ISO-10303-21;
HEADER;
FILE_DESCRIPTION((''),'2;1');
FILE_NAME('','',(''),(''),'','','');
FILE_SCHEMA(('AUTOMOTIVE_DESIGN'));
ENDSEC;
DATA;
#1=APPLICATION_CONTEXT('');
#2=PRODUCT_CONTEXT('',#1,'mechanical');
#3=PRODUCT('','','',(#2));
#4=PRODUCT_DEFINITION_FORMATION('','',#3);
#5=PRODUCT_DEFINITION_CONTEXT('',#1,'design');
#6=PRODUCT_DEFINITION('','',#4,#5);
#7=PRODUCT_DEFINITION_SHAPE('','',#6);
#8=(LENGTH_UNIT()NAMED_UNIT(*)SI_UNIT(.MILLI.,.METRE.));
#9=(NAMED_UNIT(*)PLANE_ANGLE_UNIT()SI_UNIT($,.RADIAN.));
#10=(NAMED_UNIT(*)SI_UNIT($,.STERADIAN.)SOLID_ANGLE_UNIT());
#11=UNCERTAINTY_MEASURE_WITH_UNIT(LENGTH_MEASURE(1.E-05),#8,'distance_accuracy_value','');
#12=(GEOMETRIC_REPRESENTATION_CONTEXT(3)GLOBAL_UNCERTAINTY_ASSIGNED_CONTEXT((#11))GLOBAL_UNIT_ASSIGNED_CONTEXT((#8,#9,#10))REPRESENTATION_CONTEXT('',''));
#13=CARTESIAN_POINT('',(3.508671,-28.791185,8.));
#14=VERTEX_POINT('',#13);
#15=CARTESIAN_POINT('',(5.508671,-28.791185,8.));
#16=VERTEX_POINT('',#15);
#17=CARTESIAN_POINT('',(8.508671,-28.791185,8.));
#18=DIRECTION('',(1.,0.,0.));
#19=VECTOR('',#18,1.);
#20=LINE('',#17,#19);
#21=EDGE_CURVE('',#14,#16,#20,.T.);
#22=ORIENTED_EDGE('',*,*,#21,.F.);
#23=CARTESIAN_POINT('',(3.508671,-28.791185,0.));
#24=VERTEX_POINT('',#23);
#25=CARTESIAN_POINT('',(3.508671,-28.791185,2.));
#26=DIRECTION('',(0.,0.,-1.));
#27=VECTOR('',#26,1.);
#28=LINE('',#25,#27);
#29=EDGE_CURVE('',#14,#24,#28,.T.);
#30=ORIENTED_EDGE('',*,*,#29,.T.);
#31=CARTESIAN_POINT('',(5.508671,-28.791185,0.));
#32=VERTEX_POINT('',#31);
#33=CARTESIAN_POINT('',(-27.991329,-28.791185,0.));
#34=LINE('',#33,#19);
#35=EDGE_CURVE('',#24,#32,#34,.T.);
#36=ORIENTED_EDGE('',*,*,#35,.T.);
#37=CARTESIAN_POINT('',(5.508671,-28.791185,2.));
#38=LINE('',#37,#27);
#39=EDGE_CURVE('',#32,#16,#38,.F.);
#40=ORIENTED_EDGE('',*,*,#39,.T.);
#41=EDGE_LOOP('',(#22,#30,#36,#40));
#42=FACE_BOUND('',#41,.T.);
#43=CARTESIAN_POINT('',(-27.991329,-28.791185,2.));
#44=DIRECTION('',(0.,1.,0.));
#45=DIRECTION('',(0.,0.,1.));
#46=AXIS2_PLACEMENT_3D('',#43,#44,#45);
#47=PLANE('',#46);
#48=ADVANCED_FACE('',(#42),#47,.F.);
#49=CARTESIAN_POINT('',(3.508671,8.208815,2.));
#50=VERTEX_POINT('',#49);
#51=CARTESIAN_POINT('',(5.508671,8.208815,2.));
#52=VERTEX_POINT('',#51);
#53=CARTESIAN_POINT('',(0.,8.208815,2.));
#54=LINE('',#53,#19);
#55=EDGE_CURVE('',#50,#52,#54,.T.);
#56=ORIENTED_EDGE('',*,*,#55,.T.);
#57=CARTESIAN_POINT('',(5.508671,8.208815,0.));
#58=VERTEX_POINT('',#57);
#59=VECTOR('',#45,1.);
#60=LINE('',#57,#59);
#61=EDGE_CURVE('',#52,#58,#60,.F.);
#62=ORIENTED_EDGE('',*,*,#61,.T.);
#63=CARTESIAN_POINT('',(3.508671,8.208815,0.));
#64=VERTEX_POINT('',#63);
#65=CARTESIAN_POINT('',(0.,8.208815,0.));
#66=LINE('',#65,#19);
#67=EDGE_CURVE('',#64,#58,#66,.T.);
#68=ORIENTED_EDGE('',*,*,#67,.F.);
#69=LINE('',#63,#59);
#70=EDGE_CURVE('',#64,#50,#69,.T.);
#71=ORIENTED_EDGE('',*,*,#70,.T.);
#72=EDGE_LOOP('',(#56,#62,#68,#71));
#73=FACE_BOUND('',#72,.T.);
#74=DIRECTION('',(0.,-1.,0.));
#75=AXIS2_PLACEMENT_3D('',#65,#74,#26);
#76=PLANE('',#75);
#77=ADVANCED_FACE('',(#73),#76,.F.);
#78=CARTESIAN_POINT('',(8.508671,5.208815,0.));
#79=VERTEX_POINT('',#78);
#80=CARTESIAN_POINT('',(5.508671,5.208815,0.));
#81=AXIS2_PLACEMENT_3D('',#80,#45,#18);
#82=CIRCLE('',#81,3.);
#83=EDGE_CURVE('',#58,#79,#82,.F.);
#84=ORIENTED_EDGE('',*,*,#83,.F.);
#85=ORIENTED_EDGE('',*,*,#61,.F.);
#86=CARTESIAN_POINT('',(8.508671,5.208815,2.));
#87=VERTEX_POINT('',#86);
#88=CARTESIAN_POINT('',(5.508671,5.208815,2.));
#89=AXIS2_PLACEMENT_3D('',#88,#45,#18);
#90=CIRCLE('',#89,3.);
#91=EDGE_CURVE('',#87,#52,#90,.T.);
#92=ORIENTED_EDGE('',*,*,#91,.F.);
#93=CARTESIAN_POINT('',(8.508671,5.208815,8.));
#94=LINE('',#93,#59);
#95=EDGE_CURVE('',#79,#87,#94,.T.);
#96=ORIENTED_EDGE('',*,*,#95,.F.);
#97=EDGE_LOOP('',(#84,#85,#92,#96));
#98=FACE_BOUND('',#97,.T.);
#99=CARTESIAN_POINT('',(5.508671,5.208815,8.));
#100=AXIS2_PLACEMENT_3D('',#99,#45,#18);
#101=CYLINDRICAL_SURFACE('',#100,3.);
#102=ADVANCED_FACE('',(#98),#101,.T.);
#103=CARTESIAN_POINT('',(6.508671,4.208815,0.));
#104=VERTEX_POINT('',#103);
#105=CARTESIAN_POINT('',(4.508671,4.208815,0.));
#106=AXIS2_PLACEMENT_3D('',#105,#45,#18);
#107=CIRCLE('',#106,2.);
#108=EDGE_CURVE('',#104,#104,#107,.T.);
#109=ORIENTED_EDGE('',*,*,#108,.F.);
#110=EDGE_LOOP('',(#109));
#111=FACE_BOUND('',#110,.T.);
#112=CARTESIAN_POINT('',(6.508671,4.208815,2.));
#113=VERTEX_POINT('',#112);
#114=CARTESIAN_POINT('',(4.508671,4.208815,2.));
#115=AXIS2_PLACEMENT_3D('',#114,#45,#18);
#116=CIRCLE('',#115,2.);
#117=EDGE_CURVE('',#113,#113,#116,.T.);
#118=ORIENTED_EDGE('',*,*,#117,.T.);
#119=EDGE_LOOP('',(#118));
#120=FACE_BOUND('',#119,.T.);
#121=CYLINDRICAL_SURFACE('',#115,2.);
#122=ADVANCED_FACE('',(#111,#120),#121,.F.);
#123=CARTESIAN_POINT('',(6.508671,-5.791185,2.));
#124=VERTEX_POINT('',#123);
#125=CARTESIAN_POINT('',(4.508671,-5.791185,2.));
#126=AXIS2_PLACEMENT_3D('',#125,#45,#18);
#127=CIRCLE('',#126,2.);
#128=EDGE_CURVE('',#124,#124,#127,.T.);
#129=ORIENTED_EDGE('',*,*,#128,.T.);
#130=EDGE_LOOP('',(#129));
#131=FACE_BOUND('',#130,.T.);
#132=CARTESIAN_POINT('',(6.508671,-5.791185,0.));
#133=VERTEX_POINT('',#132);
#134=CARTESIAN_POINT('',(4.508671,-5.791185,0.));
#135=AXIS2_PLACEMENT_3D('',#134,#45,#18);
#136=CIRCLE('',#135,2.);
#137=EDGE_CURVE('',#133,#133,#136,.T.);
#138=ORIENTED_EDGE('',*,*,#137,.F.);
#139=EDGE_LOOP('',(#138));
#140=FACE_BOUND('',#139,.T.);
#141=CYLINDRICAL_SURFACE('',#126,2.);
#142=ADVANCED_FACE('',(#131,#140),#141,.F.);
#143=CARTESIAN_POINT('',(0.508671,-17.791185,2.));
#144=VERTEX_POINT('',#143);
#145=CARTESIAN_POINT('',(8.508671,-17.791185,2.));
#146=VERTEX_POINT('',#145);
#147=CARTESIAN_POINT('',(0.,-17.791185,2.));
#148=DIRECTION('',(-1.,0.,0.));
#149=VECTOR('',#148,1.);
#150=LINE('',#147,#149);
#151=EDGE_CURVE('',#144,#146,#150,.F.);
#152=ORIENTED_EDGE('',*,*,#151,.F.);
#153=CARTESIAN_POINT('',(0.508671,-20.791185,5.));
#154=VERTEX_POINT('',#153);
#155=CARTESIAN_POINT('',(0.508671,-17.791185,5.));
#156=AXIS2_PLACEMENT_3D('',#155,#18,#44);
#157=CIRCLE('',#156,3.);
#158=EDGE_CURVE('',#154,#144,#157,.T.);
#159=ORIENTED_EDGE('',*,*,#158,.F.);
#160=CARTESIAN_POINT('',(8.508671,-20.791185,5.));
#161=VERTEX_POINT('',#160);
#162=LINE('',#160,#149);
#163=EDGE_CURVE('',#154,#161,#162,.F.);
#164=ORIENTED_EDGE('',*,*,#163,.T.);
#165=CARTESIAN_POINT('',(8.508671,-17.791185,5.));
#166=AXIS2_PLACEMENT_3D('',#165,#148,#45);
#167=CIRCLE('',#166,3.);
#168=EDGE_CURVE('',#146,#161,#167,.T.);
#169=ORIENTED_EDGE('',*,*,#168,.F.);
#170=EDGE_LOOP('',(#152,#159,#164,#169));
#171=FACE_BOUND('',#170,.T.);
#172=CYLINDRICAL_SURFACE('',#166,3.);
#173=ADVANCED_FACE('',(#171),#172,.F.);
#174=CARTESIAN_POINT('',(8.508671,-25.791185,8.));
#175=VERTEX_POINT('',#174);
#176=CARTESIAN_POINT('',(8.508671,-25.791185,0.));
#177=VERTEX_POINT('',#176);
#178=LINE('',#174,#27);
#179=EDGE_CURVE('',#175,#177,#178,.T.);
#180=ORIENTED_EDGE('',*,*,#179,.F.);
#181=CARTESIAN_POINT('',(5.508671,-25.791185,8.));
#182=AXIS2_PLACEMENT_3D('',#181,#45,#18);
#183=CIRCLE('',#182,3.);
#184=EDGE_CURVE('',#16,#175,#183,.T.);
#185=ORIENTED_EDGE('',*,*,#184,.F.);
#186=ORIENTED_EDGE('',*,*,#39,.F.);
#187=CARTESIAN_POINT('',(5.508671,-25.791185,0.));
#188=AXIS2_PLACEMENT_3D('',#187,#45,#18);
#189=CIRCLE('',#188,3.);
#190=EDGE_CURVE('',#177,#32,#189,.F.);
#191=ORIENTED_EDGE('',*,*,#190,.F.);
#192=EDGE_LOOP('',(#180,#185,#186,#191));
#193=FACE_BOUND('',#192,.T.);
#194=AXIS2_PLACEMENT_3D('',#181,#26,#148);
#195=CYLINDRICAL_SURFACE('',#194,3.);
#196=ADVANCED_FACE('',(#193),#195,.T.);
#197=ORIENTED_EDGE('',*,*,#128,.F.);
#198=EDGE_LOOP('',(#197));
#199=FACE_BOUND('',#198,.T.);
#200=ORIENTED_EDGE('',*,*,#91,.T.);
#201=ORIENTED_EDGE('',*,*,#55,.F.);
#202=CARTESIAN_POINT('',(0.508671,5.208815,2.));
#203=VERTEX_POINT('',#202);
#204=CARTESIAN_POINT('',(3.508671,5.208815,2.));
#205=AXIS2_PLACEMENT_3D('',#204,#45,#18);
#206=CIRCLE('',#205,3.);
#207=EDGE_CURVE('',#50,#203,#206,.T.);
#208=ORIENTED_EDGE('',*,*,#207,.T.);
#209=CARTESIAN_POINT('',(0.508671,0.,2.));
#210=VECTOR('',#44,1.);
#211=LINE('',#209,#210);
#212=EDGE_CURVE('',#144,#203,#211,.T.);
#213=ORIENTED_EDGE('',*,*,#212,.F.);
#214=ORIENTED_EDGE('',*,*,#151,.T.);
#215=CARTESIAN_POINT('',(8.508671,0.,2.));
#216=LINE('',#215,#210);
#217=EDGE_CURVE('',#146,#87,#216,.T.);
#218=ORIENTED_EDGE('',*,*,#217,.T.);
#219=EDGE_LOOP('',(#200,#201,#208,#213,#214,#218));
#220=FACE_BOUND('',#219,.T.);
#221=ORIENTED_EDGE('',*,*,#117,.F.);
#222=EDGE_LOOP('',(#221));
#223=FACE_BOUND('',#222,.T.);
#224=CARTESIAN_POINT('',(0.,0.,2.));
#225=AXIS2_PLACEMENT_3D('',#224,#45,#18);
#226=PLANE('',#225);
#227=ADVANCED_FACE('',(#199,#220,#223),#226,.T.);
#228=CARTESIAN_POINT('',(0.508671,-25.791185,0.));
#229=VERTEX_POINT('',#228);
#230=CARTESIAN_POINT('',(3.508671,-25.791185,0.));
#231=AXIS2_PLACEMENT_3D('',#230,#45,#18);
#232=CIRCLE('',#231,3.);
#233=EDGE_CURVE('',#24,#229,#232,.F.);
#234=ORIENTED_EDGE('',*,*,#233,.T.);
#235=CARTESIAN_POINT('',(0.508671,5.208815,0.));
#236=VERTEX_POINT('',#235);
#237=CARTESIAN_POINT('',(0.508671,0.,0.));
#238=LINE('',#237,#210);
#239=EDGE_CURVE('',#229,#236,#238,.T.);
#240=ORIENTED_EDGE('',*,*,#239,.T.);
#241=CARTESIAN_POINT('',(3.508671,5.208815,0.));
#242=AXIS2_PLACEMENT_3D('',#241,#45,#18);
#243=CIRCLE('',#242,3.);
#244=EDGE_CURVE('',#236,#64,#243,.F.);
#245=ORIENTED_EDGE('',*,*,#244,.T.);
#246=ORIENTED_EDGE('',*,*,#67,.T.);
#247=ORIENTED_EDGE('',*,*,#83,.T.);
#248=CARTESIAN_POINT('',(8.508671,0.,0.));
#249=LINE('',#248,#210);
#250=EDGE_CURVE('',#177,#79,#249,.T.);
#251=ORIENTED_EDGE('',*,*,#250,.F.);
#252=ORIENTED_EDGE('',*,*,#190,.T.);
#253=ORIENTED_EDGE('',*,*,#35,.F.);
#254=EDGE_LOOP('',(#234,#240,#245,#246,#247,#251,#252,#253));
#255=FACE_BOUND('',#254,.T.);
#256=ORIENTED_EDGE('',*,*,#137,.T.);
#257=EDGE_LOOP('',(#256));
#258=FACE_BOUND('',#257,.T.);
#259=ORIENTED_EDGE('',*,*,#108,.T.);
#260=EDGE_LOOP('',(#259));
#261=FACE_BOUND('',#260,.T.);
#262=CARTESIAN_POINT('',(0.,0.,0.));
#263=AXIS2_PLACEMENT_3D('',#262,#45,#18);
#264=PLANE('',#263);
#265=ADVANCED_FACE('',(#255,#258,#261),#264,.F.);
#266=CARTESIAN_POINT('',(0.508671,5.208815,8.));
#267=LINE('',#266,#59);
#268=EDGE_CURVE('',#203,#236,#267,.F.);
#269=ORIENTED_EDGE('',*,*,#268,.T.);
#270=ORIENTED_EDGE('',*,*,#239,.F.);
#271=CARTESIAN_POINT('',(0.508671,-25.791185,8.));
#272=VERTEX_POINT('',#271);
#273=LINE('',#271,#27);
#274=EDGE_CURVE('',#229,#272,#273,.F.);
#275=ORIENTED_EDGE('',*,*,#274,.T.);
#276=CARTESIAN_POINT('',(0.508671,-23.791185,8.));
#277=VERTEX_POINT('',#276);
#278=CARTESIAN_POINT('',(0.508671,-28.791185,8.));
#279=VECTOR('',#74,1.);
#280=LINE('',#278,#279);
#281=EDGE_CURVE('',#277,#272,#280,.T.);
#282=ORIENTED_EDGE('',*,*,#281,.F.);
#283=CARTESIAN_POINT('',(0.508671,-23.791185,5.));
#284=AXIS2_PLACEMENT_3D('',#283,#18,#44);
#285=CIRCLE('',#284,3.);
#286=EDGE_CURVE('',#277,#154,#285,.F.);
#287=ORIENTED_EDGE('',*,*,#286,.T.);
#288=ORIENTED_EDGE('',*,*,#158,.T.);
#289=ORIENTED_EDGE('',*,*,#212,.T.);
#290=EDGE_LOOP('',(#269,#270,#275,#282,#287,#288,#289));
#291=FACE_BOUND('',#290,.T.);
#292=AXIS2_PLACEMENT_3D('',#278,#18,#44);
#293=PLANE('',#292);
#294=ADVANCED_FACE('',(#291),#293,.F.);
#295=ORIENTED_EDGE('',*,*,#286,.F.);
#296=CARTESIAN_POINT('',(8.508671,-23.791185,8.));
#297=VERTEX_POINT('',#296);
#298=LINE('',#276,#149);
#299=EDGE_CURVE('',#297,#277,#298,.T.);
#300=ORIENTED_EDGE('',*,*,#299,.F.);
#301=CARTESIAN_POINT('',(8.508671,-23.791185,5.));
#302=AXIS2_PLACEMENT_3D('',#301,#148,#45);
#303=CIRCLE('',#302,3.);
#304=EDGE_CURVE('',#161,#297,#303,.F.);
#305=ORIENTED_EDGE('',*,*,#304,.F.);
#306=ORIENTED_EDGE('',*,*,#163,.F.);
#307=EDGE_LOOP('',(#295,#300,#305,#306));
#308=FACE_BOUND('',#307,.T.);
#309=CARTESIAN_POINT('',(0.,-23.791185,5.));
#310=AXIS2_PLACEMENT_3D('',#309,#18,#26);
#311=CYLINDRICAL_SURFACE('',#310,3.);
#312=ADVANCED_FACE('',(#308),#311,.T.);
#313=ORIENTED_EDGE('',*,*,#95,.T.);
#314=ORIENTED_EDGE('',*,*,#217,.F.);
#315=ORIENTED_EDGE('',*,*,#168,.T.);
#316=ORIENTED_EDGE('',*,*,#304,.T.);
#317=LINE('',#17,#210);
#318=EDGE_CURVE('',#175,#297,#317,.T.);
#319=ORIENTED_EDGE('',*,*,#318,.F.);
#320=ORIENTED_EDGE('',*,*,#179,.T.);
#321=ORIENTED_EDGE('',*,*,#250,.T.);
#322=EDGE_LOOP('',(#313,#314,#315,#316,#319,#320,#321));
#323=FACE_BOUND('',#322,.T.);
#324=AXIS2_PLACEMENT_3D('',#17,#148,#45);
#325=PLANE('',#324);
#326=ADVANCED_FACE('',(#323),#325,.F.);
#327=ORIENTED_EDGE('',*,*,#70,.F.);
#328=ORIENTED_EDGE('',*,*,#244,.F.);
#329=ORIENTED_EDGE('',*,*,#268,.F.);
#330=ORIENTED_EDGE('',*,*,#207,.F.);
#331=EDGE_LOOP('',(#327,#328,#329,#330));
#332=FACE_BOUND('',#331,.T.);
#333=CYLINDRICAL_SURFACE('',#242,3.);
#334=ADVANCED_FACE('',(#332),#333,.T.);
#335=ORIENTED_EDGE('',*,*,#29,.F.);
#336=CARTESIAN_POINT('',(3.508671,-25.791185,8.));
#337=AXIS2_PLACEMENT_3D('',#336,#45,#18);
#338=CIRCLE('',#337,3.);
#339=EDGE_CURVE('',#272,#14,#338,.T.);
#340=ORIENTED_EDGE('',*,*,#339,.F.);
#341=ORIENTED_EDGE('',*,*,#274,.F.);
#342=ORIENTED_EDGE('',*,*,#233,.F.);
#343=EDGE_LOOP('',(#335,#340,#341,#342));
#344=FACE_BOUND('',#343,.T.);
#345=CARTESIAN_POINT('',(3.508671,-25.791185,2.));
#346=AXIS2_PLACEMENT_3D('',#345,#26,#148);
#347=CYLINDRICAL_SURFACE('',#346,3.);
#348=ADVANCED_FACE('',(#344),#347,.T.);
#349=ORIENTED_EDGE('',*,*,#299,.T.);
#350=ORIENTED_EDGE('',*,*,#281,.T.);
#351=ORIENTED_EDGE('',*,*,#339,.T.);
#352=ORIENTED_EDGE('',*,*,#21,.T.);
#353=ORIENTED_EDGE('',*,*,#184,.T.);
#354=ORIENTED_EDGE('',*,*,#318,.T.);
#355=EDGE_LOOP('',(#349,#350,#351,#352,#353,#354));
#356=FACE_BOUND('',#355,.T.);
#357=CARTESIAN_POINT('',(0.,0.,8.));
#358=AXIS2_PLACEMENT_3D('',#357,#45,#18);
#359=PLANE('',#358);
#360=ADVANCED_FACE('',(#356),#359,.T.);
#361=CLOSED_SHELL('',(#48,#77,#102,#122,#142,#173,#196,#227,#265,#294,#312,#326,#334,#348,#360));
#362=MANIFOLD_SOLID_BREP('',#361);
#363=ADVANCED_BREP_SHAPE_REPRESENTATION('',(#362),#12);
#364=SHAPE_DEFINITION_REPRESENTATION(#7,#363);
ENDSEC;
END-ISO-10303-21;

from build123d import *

# Parameters (mm, degrees)
SKETCH1_W            = 65
SKETCH1_H            = 48
BOSS_EXTRUDE1_DEPTH  = 2
M3_CLEARANCE_HOLE1_D = 4
SKETCH5_W            = 8
SKETCH5_H            = 8
BOSS_EXTRUDE2_DEPTH  = 6
CUT_EXTRUDE1_DEPTH   = 48.271281194
FILLET4_R            = 3


with BuildPart() as part:
    # Sketch1 → Boss-Extrude1 (new body)
    with BuildSketch(Plane.XY):
        with Locations((4.50867052, -4.791184971)):
            Rectangle(SKETCH1_W, SKETCH1_H)
    extrude(amount=BOSS_EXTRUDE1_DEPTH)

    # M3 Clearance Hole1 (through all)
    with Locations(Plane.XY.offset(2)):
        with Locations((4.50867052, 4.208815029), (4.50867052, -5.791184971)):
            Hole(M3_CLEARANCE_HOLE1_D / 2)

    # Sketch5 → Boss-Extrude2 (add)
    with BuildSketch(Plane.XY.offset(2)):
        with Locations((4.50867052, -24.791184971)):
            Rectangle(SKETCH5_W, SKETCH5_H)
    extrude(amount=BOSS_EXTRUDE2_DEPTH)

    # Sketch6 → Cut-Extrude1 (cut, through all)
    with BuildSketch(Plane.XY.offset(2)):
        Polygon((-27.99132948, -28.791184971), (0.50867052, -28.791184971), (0.50867052, -20.791184971), (0.50867052, 8.208815029), (8.50867052, 8.208815029), (8.50867052, -20.791184971), (8.50867052, -28.791184971), (37.00867052, -28.791184971), (37.00867052, 19.208815029), (-27.99132948, 19.208815029), align=None)
    extrude(amount=-CUT_EXTRUDE1_DEPTH, mode=Mode.SUBTRACT)

    # Fillet4
    fillet4_edges = [part.edges().sort_by_distance(p)[0] for p in [
        (8.50867052, -28.791184971, 4),
        (4.50867052, -20.791184971, 2),
        (4.50867052, -20.791184971, 8),
        (0.50867052, 8.208815029, 1),
        (8.50867052, 8.208815029, 1),
        (0.50867052, -28.791184971, 4),
    ]]
    fillet(fillet4_edges, radius=FILLET4_R - 0.0001)  # a hair under: the kernel refuses the full size


solid = part.part
